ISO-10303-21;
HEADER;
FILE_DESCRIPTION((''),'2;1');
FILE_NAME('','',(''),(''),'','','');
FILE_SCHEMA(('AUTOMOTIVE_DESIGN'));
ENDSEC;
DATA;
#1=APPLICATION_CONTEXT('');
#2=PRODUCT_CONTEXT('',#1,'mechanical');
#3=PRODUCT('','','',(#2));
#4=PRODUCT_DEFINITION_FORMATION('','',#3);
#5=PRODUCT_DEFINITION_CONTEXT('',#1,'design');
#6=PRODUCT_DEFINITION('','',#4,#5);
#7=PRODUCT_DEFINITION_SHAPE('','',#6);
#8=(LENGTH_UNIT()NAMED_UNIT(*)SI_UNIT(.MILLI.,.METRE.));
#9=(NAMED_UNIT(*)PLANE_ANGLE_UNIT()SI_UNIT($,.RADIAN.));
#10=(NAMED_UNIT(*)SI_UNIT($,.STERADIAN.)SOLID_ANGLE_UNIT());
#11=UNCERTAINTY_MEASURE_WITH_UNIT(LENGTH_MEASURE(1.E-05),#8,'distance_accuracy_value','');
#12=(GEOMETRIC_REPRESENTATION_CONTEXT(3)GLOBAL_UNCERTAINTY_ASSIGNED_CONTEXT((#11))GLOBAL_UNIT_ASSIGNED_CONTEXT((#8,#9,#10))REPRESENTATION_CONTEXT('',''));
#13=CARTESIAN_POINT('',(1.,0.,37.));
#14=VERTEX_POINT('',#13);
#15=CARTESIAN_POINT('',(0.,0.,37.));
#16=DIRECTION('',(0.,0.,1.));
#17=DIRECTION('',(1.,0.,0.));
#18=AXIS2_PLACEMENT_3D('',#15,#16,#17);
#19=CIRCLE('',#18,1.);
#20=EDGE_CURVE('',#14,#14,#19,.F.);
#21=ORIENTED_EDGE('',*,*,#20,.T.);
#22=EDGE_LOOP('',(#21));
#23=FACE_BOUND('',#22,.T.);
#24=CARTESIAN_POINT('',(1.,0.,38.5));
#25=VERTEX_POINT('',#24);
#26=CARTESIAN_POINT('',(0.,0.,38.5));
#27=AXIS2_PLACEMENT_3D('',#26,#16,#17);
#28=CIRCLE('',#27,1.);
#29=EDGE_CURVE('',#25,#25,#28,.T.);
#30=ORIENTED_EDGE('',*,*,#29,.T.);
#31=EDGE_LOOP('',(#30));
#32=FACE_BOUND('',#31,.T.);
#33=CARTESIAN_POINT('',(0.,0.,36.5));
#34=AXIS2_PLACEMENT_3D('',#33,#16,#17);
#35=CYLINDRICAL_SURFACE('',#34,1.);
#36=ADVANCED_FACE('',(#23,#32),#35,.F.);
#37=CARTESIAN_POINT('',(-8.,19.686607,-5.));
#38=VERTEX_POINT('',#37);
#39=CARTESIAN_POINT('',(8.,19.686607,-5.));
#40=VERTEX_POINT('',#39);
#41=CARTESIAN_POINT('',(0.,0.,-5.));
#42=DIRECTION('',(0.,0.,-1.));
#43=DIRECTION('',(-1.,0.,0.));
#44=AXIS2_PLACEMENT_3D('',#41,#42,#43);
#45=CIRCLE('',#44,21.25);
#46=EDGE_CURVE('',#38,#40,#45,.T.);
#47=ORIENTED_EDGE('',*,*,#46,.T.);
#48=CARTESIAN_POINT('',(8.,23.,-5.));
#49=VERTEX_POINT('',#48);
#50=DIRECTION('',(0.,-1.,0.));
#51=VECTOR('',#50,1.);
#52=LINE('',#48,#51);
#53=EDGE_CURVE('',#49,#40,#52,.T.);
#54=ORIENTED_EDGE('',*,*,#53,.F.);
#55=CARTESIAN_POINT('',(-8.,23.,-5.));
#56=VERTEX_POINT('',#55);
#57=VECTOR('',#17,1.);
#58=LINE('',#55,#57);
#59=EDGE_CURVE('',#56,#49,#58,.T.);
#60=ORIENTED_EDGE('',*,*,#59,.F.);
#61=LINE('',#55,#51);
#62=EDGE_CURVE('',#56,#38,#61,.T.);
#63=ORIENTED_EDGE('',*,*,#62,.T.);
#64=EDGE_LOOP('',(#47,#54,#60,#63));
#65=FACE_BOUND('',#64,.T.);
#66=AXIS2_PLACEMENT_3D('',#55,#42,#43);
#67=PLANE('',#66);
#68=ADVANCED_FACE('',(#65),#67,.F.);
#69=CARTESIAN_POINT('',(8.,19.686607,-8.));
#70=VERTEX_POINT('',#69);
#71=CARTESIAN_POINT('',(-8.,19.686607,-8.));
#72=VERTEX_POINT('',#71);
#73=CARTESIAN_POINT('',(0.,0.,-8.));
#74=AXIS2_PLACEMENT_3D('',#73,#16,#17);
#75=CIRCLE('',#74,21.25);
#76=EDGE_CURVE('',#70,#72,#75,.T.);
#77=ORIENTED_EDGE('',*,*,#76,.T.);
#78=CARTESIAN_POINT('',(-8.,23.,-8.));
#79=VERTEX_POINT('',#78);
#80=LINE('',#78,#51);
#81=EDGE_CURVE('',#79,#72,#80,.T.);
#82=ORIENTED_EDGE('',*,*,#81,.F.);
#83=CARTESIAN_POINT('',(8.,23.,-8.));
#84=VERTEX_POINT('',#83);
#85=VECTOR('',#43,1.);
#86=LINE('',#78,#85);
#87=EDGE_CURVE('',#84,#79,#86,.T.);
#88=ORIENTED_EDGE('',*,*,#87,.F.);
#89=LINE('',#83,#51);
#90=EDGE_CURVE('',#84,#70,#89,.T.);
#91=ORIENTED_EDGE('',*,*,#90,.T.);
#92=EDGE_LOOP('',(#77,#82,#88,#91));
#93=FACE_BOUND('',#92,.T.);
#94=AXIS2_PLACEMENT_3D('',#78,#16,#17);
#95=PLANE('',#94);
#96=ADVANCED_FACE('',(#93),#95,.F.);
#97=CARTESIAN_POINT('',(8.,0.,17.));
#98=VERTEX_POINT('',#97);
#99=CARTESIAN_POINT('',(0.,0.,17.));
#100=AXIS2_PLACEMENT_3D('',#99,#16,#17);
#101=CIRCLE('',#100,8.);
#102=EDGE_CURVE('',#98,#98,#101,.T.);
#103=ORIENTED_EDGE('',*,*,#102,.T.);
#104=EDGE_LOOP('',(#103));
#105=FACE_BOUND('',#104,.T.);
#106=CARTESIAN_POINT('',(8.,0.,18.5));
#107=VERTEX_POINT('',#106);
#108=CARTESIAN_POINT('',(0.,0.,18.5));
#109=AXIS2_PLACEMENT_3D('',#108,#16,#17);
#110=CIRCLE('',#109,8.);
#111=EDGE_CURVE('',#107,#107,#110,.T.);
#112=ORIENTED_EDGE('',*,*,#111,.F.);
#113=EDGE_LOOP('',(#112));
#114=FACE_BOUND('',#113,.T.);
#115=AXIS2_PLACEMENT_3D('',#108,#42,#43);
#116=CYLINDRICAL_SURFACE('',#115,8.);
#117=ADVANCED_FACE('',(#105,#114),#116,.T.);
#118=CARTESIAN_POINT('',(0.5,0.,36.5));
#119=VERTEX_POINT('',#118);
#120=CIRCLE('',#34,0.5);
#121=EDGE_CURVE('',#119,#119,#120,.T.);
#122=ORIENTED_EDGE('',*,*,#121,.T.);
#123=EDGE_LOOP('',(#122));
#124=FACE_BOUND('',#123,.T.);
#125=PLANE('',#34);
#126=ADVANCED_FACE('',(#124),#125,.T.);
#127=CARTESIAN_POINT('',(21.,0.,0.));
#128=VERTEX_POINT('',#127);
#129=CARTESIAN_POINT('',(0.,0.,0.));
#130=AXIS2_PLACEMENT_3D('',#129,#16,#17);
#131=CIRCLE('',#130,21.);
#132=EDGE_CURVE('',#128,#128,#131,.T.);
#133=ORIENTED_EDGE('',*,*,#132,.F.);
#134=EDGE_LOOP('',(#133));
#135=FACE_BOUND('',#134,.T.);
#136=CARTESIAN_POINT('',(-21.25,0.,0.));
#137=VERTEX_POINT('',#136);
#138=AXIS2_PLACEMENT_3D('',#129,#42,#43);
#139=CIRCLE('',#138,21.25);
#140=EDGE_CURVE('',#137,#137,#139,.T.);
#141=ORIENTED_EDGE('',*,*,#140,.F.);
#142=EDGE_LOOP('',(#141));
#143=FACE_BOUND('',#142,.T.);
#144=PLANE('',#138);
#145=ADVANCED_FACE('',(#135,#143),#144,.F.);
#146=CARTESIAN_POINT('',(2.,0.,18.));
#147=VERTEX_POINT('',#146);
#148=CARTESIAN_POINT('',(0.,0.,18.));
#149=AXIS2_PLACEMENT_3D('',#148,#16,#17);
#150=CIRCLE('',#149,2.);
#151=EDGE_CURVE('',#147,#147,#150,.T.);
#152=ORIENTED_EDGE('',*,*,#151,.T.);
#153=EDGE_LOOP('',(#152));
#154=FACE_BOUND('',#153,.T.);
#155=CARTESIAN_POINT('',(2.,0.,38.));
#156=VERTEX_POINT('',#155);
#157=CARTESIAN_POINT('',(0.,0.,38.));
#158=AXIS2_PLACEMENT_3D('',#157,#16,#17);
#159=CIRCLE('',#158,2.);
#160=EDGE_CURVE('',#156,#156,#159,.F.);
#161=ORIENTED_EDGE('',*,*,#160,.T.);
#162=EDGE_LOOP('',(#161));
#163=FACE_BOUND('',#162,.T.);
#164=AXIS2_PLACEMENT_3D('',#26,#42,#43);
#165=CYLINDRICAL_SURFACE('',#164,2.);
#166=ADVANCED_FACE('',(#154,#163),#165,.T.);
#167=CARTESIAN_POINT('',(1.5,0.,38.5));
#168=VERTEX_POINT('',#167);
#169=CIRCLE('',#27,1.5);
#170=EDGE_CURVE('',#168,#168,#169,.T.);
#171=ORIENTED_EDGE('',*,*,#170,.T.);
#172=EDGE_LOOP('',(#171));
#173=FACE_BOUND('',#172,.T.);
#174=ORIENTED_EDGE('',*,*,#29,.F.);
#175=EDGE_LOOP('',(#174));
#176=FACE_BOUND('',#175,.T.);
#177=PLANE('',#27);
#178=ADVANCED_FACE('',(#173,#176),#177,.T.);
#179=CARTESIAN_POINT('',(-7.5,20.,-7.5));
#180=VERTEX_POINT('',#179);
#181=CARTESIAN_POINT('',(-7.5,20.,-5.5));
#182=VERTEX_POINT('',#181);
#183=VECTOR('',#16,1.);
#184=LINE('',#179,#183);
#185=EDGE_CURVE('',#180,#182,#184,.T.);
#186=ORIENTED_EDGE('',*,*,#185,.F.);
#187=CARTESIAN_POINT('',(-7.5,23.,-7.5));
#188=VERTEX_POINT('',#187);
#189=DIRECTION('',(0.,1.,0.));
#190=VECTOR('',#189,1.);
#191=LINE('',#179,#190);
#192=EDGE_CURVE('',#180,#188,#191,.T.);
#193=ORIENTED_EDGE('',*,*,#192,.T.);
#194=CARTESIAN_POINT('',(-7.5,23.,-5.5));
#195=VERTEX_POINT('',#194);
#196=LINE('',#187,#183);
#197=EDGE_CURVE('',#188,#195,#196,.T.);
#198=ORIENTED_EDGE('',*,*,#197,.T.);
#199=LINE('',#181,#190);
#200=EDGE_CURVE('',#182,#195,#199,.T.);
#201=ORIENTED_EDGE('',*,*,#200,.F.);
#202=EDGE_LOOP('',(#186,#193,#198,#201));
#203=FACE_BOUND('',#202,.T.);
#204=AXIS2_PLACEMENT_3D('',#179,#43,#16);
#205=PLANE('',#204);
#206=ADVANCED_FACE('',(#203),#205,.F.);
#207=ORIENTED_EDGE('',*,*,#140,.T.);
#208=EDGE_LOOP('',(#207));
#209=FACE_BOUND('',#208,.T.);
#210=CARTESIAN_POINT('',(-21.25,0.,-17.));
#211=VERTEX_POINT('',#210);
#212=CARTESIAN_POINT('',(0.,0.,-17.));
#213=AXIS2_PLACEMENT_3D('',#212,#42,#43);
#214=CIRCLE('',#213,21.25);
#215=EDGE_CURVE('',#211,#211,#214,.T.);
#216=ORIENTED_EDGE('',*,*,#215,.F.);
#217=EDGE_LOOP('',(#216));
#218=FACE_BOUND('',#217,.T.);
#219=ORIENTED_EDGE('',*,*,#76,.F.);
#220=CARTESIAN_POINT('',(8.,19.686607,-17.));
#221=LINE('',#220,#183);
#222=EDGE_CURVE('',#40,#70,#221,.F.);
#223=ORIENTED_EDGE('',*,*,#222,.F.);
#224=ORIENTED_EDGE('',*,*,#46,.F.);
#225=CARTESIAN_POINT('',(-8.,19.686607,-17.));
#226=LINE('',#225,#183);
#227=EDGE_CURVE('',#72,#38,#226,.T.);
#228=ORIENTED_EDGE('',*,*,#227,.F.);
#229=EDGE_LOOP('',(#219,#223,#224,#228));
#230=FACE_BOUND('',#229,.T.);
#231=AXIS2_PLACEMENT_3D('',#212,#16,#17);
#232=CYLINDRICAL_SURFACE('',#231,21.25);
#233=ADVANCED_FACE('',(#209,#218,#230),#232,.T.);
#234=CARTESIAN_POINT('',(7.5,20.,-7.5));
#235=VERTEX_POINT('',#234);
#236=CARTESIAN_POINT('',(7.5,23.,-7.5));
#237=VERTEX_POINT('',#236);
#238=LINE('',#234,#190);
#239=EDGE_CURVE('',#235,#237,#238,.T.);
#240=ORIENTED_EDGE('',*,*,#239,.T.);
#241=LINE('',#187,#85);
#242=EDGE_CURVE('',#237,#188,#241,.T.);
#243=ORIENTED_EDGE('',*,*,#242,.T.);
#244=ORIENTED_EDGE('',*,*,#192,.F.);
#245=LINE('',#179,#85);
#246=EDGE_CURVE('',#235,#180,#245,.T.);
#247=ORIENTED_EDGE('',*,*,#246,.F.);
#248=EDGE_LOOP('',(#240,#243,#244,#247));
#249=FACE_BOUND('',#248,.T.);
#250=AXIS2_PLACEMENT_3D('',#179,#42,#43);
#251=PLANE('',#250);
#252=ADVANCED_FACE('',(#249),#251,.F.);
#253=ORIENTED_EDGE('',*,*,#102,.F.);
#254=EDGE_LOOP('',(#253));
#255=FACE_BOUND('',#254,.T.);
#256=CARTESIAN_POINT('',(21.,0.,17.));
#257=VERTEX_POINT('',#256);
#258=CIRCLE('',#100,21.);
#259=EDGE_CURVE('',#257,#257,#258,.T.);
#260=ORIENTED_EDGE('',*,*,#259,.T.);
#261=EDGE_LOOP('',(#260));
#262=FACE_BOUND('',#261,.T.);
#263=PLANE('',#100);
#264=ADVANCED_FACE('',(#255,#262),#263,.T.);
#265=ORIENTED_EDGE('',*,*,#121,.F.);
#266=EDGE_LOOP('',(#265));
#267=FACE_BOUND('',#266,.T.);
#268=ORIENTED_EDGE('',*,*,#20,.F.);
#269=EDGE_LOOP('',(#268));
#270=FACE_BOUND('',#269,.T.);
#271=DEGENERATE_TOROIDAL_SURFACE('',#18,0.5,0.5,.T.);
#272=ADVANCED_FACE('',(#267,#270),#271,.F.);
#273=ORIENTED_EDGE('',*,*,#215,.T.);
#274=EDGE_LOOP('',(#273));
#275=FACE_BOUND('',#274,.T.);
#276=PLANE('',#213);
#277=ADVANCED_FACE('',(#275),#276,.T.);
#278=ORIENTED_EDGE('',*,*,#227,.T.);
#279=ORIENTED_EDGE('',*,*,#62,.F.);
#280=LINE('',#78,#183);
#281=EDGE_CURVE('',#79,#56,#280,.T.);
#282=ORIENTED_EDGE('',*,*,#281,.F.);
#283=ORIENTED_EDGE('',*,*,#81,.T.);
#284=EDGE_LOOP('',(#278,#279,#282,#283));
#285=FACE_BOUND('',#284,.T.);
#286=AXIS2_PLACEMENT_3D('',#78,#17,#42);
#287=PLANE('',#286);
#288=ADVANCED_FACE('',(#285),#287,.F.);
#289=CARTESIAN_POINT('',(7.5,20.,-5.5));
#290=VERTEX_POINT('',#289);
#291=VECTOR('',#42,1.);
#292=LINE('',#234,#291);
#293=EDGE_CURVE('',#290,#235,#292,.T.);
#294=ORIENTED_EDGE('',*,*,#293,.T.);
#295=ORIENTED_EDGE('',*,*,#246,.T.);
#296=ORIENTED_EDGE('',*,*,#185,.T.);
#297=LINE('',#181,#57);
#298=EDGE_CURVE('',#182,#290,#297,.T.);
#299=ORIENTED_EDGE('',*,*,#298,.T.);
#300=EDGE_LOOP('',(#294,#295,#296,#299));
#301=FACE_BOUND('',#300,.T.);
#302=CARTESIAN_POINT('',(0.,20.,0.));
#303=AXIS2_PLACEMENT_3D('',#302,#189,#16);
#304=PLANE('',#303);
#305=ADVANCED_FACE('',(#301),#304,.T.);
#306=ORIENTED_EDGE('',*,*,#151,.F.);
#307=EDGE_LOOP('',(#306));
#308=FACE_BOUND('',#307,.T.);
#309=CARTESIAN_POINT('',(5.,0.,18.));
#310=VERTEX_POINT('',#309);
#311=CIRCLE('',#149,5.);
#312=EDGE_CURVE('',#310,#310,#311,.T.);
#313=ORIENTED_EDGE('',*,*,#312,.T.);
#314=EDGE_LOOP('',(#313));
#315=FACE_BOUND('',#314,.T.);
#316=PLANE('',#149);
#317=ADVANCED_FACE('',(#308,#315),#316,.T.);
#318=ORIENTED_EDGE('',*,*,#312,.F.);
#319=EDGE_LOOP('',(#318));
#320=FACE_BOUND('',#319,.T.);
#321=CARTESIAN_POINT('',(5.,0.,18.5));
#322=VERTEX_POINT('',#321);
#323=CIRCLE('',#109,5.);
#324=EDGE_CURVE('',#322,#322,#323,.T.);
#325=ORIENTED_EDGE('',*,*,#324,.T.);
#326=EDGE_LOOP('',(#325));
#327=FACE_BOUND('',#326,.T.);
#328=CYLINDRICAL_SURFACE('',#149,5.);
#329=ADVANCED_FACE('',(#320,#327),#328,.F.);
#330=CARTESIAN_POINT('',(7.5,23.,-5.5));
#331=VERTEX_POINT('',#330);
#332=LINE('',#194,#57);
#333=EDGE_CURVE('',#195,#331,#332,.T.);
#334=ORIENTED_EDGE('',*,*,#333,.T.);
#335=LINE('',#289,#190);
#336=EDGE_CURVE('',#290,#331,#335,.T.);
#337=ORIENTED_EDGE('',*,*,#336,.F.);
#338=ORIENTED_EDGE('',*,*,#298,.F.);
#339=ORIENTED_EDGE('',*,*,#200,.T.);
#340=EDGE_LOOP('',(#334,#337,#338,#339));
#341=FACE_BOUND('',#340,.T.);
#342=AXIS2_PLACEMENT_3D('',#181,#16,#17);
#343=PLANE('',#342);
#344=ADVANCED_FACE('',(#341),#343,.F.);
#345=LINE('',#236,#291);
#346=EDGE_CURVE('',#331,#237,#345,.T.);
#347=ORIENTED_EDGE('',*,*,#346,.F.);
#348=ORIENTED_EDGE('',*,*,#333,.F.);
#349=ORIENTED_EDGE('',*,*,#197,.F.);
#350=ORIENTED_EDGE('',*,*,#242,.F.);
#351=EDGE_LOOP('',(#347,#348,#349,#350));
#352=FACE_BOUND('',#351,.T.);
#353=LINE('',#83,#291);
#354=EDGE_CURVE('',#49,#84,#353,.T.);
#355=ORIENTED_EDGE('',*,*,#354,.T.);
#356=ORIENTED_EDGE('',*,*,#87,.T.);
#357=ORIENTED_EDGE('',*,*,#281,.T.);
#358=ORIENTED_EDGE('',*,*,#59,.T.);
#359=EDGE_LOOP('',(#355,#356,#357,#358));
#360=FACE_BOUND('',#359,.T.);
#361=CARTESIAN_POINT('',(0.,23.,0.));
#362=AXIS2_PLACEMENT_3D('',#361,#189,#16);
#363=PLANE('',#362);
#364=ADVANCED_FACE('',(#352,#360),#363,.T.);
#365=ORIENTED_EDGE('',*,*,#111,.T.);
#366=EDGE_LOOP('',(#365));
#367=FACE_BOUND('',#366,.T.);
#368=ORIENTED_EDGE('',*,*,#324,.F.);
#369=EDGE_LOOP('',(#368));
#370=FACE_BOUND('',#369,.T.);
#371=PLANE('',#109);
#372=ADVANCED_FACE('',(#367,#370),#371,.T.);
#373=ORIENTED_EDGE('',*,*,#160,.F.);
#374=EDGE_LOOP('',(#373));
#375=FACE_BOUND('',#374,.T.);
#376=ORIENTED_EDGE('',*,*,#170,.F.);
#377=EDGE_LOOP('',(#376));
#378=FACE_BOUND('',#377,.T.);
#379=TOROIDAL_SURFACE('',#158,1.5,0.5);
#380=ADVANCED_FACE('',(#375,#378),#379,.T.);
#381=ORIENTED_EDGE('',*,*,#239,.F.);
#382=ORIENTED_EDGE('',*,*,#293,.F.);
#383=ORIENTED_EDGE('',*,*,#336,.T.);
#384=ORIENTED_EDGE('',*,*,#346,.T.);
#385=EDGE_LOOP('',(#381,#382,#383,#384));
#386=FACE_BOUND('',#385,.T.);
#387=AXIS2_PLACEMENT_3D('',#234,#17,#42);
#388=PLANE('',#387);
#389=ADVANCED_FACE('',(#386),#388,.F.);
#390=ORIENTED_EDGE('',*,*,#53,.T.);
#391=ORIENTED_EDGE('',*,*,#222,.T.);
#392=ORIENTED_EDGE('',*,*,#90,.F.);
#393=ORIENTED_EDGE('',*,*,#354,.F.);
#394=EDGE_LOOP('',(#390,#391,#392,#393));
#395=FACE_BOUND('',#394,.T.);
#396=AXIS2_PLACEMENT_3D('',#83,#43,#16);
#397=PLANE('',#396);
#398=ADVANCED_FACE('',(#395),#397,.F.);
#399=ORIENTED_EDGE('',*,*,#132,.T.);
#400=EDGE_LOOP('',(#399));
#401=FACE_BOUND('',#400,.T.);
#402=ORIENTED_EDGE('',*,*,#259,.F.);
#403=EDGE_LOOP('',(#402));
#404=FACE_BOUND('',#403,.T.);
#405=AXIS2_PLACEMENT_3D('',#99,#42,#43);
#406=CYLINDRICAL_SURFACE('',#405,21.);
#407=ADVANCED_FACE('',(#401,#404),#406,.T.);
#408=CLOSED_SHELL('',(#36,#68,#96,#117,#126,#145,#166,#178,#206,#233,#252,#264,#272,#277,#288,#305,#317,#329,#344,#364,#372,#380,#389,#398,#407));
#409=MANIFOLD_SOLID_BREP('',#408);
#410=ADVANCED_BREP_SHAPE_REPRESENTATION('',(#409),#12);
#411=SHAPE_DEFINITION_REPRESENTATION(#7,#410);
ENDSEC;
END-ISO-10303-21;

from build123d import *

# Parameters (mm, degrees)
SKETCH_1_R          = 21
EXTRUDE_1_DEPTH     = 17
SKETCH_2_R          = 8
EXTRUDE_2_DEPTH     = 1.5
SKETCH_3_R          = 3
EXTRUDE_3_DEPTH     = 20.5
CHAMFER_1_SIZE      = 1
THREAD_1_PITCH      = 1
CUT_EXTRUDE_1_DEPTH = 1
EXTRUDE1_DEPTH      = 50.020403995
EXTRUDE1_DEPTH_BACK = 50.020403995
SKETCH1_W           = 6
SKETCH1_H           = 20.5
SKETCH2_R           = 2
EXTRUDE2_DEPTH      = 20
FILLET1_R           = 0.5
SKETCH3_R           = 1
EXTRUDE3_DEPTH      = 2
FILLET2_R           = 0.5
EXTRUDE5_START      = -0.5
SKETCH4_R           = 5
SKETCH4_R_2         = 2
EXTRUDE5_DEPTH      = 0.5
SKETCH5_R           = 21.25
EXTRUDE7_DEPTH      = 17
SKETCH6_W           = 16
SKETCH6_H           = 3
EXTRUDE8_DEPTH      = 8
SKETCH7_W           = 15
SKETCH7_H           = 2
EXTRUDE9_DEPTH      = 3


with BuildPart() as part:
    # Sketch 1 → 보스-돌출1 (new body)
    with BuildSketch(Plane.XY):
        Circle(SKETCH_1_R)
    extrude(amount=EXTRUDE_1_DEPTH)

    # 스케치2 → 보스-돌출2 (add)
    with BuildSketch(Plane.XY.offset(17)):
        Circle(SKETCH_2_R)
    extrude(amount=EXTRUDE_2_DEPTH)

    # 스케치3 → 보스-돌출3 (add)
    with BuildSketch(Plane.XY.offset(18.5)):
        Circle(SKETCH_3_R)
    extrude(amount=EXTRUDE_3_DEPTH)

    # 모따기1
    chamfer_1_edges = [part.edges().sort_by_distance(p)[0] for p in [
        (-3, 0, 39),
    ]]
    chamfer(chamfer_1_edges, length=CHAMFER_1_SIZE)

    # 나사산1: the profile of Sketch 1 2 profile screwed along a right-hand helix of 8 turns, 8 arcs to a turn; built about Z, then put on its axis
    thread_1_z = Axis((0, 0, 0), (0, 0, 1))
    thread_1_corners = [(3.0003, 0, -0.000173205), (3.0003, 0, 0.875173202), (2.458734125, 0, 0.562499999), (2.458734125, 0, 0.312499999)]
    with BuildLine(mode=Mode.PRIVATE) as thread_1_profile:
        Line(thread_1_corners[0], thread_1_corners[1])
        Line(thread_1_corners[1], thread_1_corners[2])
        Line(thread_1_corners[2], thread_1_corners[3])
        Line(thread_1_corners[3], thread_1_corners[0])
    thread_1_cap = Face(thread_1_profile.wire())
    thread_1_turn_angles = [0, 22.5, 45, 67.5, 90, 112.5, 135, 157.5, 180, 202.5, 225, 247.5, 270, 292.5, 315, 337.5, 360]
    thread_1_turn_weights = [1, 0.9238795325112867, 1, 0.9238795325112867, 1, 0.9238795325112867, 1, 0.9238795325112867, 1, 0.9238795325112867, 1, 0.9238795325112867, 1, 0.9238795325112867, 1, 0.9238795325112867, 1]
    thread_1_turn_rails = [Edge.make_bspline([Vector(p[0], p[1], 0).rotate(thread_1_z, thread_1_turn_angles[k]) / thread_1_turn_weights[k] + Vector(0, 0, p[2] + THREAD_1_PITCH * thread_1_turn_angles[k] / 360) for k in range(17)], [0, 0, 0, 1, 1, 2, 2, 3, 3, 4, 4, 5, 5, 6, 6, 7, 7, 8, 8, 8], 2, thread_1_turn_weights) for p in thread_1_corners]
    thread_1_turn_sides = [Face.make_surface_from_curves(thread_1_turn_rails[p[0]], thread_1_turn_rails[p[1]]) for p in [(0, 1), (1, 2), (2, 3), (3, 0)]]
    thread_1 = Plane(origin=(0, 0, 38), x_dir=(-1, 0, 0), z_dir=(0, 0, -1)) * Solid(Shell([*[p.moved(Location((0, 0, THREAD_1_PITCH * i))) for i in range(8) for p in thread_1_turn_sides], thread_1_cap, thread_1_cap.rotate(thread_1_z, 2880).moved(Location((0, 0, THREAD_1_PITCH * 2880 / 360)))]))
    add(thread_1, mode=Mode.SUBTRACT)

    # 스케치8 → 컷-돌출1 (cut)
    with BuildSketch(Plane(origin=(0, 3, 0), x_dir=(1, 0, 0), z_dir=(0, 1, 0))):
        Polygon((3, -39), (3, -38), (3, -37.5), (3, -29.625000003), (3, -27), (-3, -27), (-3, -29.125000003), (-3, -30), (-3, -37.125000003), (-3, -38), (-3, -39), (-2, -39), (2, -39), align=None)
    extrude(amount=-CUT_EXTRUDE_1_DEPTH, mode=Mode.SUBTRACT)

    # Sketch1 → Extrude1 (cut, two sides: drawn at the far end of the back side and taken through both)
    with BuildSketch(Plane(origin=(0, 0, 0), x_dir=(1, 0, 0), z_dir=(0, 1, 0)).offset(-EXTRUDE1_DEPTH_BACK)):
        with Locations((0, -28.75)):
            Rectangle(SKETCH1_W, SKETCH1_H)
    extrude(amount=EXTRUDE1_DEPTH + EXTRUDE1_DEPTH_BACK, mode=Mode.SUBTRACT)

    # Sketch2 → Extrude2 (add)
    with BuildSketch(Plane.XY.offset(18.5)):
        Circle(SKETCH2_R)
    extrude(amount=EXTRUDE2_DEPTH)

    # Fillet1
    fillet1_edges = [part.edges().sort_by_distance(p)[0] for p in [
        (-2, 0, 38.5),
    ]]
    fillet(fillet1_edges, radius=FILLET1_R)

    # Sketch3 → Extrude3 (cut)
    with BuildSketch(Plane.XY.offset(38.5)):
        Circle(SKETCH3_R)
    extrude(amount=-EXTRUDE3_DEPTH, mode=Mode.SUBTRACT)

    # Fillet2
    fillet2_edges = [part.edges().sort_by_distance(p)[0] for p in [
        (-1, 0, 36.5),
    ]]
    fillet(fillet2_edges, radius=FILLET2_R)

    # Sketch4 → Extrude5 (cut)
    with BuildSketch(Plane.XY.offset(18.5).offset(EXTRUDE5_START)):
        Circle(SKETCH4_R)
        Circle(SKETCH4_R_2, mode=Mode.SUBTRACT)
    extrude(amount=EXTRUDE5_DEPTH, mode=Mode.SUBTRACT)

    # Sketch5 → Extrude7 (add)
    with BuildSketch(Plane(origin=(0, 0, 0), x_dir=(-1, 0, 0), z_dir=(0, 0, -1))):
        Circle(SKETCH5_R)
    extrude(amount=EXTRUDE7_DEPTH)

    # Sketch6 → Extrude8 (add)
    with BuildSketch(Plane(origin=(0, 15, 0), x_dir=(1, 0, 0), z_dir=(0, 1, 0))):
        with Locations((0, 6.5)):
            Rectangle(SKETCH6_W, SKETCH6_H)
    extrude(amount=EXTRUDE8_DEPTH)

    # Sketch7 → Extrude9 (cut)
    with BuildSketch(Plane(origin=(0, 23, 0), x_dir=(1, 0, 0), z_dir=(0, 1, 0))):
        with Locations((0, 6.5)):
            Rectangle(SKETCH7_W, SKETCH7_H)
    extrude(amount=-EXTRUDE9_DEPTH, mode=Mode.SUBTRACT)


solid = part.part
